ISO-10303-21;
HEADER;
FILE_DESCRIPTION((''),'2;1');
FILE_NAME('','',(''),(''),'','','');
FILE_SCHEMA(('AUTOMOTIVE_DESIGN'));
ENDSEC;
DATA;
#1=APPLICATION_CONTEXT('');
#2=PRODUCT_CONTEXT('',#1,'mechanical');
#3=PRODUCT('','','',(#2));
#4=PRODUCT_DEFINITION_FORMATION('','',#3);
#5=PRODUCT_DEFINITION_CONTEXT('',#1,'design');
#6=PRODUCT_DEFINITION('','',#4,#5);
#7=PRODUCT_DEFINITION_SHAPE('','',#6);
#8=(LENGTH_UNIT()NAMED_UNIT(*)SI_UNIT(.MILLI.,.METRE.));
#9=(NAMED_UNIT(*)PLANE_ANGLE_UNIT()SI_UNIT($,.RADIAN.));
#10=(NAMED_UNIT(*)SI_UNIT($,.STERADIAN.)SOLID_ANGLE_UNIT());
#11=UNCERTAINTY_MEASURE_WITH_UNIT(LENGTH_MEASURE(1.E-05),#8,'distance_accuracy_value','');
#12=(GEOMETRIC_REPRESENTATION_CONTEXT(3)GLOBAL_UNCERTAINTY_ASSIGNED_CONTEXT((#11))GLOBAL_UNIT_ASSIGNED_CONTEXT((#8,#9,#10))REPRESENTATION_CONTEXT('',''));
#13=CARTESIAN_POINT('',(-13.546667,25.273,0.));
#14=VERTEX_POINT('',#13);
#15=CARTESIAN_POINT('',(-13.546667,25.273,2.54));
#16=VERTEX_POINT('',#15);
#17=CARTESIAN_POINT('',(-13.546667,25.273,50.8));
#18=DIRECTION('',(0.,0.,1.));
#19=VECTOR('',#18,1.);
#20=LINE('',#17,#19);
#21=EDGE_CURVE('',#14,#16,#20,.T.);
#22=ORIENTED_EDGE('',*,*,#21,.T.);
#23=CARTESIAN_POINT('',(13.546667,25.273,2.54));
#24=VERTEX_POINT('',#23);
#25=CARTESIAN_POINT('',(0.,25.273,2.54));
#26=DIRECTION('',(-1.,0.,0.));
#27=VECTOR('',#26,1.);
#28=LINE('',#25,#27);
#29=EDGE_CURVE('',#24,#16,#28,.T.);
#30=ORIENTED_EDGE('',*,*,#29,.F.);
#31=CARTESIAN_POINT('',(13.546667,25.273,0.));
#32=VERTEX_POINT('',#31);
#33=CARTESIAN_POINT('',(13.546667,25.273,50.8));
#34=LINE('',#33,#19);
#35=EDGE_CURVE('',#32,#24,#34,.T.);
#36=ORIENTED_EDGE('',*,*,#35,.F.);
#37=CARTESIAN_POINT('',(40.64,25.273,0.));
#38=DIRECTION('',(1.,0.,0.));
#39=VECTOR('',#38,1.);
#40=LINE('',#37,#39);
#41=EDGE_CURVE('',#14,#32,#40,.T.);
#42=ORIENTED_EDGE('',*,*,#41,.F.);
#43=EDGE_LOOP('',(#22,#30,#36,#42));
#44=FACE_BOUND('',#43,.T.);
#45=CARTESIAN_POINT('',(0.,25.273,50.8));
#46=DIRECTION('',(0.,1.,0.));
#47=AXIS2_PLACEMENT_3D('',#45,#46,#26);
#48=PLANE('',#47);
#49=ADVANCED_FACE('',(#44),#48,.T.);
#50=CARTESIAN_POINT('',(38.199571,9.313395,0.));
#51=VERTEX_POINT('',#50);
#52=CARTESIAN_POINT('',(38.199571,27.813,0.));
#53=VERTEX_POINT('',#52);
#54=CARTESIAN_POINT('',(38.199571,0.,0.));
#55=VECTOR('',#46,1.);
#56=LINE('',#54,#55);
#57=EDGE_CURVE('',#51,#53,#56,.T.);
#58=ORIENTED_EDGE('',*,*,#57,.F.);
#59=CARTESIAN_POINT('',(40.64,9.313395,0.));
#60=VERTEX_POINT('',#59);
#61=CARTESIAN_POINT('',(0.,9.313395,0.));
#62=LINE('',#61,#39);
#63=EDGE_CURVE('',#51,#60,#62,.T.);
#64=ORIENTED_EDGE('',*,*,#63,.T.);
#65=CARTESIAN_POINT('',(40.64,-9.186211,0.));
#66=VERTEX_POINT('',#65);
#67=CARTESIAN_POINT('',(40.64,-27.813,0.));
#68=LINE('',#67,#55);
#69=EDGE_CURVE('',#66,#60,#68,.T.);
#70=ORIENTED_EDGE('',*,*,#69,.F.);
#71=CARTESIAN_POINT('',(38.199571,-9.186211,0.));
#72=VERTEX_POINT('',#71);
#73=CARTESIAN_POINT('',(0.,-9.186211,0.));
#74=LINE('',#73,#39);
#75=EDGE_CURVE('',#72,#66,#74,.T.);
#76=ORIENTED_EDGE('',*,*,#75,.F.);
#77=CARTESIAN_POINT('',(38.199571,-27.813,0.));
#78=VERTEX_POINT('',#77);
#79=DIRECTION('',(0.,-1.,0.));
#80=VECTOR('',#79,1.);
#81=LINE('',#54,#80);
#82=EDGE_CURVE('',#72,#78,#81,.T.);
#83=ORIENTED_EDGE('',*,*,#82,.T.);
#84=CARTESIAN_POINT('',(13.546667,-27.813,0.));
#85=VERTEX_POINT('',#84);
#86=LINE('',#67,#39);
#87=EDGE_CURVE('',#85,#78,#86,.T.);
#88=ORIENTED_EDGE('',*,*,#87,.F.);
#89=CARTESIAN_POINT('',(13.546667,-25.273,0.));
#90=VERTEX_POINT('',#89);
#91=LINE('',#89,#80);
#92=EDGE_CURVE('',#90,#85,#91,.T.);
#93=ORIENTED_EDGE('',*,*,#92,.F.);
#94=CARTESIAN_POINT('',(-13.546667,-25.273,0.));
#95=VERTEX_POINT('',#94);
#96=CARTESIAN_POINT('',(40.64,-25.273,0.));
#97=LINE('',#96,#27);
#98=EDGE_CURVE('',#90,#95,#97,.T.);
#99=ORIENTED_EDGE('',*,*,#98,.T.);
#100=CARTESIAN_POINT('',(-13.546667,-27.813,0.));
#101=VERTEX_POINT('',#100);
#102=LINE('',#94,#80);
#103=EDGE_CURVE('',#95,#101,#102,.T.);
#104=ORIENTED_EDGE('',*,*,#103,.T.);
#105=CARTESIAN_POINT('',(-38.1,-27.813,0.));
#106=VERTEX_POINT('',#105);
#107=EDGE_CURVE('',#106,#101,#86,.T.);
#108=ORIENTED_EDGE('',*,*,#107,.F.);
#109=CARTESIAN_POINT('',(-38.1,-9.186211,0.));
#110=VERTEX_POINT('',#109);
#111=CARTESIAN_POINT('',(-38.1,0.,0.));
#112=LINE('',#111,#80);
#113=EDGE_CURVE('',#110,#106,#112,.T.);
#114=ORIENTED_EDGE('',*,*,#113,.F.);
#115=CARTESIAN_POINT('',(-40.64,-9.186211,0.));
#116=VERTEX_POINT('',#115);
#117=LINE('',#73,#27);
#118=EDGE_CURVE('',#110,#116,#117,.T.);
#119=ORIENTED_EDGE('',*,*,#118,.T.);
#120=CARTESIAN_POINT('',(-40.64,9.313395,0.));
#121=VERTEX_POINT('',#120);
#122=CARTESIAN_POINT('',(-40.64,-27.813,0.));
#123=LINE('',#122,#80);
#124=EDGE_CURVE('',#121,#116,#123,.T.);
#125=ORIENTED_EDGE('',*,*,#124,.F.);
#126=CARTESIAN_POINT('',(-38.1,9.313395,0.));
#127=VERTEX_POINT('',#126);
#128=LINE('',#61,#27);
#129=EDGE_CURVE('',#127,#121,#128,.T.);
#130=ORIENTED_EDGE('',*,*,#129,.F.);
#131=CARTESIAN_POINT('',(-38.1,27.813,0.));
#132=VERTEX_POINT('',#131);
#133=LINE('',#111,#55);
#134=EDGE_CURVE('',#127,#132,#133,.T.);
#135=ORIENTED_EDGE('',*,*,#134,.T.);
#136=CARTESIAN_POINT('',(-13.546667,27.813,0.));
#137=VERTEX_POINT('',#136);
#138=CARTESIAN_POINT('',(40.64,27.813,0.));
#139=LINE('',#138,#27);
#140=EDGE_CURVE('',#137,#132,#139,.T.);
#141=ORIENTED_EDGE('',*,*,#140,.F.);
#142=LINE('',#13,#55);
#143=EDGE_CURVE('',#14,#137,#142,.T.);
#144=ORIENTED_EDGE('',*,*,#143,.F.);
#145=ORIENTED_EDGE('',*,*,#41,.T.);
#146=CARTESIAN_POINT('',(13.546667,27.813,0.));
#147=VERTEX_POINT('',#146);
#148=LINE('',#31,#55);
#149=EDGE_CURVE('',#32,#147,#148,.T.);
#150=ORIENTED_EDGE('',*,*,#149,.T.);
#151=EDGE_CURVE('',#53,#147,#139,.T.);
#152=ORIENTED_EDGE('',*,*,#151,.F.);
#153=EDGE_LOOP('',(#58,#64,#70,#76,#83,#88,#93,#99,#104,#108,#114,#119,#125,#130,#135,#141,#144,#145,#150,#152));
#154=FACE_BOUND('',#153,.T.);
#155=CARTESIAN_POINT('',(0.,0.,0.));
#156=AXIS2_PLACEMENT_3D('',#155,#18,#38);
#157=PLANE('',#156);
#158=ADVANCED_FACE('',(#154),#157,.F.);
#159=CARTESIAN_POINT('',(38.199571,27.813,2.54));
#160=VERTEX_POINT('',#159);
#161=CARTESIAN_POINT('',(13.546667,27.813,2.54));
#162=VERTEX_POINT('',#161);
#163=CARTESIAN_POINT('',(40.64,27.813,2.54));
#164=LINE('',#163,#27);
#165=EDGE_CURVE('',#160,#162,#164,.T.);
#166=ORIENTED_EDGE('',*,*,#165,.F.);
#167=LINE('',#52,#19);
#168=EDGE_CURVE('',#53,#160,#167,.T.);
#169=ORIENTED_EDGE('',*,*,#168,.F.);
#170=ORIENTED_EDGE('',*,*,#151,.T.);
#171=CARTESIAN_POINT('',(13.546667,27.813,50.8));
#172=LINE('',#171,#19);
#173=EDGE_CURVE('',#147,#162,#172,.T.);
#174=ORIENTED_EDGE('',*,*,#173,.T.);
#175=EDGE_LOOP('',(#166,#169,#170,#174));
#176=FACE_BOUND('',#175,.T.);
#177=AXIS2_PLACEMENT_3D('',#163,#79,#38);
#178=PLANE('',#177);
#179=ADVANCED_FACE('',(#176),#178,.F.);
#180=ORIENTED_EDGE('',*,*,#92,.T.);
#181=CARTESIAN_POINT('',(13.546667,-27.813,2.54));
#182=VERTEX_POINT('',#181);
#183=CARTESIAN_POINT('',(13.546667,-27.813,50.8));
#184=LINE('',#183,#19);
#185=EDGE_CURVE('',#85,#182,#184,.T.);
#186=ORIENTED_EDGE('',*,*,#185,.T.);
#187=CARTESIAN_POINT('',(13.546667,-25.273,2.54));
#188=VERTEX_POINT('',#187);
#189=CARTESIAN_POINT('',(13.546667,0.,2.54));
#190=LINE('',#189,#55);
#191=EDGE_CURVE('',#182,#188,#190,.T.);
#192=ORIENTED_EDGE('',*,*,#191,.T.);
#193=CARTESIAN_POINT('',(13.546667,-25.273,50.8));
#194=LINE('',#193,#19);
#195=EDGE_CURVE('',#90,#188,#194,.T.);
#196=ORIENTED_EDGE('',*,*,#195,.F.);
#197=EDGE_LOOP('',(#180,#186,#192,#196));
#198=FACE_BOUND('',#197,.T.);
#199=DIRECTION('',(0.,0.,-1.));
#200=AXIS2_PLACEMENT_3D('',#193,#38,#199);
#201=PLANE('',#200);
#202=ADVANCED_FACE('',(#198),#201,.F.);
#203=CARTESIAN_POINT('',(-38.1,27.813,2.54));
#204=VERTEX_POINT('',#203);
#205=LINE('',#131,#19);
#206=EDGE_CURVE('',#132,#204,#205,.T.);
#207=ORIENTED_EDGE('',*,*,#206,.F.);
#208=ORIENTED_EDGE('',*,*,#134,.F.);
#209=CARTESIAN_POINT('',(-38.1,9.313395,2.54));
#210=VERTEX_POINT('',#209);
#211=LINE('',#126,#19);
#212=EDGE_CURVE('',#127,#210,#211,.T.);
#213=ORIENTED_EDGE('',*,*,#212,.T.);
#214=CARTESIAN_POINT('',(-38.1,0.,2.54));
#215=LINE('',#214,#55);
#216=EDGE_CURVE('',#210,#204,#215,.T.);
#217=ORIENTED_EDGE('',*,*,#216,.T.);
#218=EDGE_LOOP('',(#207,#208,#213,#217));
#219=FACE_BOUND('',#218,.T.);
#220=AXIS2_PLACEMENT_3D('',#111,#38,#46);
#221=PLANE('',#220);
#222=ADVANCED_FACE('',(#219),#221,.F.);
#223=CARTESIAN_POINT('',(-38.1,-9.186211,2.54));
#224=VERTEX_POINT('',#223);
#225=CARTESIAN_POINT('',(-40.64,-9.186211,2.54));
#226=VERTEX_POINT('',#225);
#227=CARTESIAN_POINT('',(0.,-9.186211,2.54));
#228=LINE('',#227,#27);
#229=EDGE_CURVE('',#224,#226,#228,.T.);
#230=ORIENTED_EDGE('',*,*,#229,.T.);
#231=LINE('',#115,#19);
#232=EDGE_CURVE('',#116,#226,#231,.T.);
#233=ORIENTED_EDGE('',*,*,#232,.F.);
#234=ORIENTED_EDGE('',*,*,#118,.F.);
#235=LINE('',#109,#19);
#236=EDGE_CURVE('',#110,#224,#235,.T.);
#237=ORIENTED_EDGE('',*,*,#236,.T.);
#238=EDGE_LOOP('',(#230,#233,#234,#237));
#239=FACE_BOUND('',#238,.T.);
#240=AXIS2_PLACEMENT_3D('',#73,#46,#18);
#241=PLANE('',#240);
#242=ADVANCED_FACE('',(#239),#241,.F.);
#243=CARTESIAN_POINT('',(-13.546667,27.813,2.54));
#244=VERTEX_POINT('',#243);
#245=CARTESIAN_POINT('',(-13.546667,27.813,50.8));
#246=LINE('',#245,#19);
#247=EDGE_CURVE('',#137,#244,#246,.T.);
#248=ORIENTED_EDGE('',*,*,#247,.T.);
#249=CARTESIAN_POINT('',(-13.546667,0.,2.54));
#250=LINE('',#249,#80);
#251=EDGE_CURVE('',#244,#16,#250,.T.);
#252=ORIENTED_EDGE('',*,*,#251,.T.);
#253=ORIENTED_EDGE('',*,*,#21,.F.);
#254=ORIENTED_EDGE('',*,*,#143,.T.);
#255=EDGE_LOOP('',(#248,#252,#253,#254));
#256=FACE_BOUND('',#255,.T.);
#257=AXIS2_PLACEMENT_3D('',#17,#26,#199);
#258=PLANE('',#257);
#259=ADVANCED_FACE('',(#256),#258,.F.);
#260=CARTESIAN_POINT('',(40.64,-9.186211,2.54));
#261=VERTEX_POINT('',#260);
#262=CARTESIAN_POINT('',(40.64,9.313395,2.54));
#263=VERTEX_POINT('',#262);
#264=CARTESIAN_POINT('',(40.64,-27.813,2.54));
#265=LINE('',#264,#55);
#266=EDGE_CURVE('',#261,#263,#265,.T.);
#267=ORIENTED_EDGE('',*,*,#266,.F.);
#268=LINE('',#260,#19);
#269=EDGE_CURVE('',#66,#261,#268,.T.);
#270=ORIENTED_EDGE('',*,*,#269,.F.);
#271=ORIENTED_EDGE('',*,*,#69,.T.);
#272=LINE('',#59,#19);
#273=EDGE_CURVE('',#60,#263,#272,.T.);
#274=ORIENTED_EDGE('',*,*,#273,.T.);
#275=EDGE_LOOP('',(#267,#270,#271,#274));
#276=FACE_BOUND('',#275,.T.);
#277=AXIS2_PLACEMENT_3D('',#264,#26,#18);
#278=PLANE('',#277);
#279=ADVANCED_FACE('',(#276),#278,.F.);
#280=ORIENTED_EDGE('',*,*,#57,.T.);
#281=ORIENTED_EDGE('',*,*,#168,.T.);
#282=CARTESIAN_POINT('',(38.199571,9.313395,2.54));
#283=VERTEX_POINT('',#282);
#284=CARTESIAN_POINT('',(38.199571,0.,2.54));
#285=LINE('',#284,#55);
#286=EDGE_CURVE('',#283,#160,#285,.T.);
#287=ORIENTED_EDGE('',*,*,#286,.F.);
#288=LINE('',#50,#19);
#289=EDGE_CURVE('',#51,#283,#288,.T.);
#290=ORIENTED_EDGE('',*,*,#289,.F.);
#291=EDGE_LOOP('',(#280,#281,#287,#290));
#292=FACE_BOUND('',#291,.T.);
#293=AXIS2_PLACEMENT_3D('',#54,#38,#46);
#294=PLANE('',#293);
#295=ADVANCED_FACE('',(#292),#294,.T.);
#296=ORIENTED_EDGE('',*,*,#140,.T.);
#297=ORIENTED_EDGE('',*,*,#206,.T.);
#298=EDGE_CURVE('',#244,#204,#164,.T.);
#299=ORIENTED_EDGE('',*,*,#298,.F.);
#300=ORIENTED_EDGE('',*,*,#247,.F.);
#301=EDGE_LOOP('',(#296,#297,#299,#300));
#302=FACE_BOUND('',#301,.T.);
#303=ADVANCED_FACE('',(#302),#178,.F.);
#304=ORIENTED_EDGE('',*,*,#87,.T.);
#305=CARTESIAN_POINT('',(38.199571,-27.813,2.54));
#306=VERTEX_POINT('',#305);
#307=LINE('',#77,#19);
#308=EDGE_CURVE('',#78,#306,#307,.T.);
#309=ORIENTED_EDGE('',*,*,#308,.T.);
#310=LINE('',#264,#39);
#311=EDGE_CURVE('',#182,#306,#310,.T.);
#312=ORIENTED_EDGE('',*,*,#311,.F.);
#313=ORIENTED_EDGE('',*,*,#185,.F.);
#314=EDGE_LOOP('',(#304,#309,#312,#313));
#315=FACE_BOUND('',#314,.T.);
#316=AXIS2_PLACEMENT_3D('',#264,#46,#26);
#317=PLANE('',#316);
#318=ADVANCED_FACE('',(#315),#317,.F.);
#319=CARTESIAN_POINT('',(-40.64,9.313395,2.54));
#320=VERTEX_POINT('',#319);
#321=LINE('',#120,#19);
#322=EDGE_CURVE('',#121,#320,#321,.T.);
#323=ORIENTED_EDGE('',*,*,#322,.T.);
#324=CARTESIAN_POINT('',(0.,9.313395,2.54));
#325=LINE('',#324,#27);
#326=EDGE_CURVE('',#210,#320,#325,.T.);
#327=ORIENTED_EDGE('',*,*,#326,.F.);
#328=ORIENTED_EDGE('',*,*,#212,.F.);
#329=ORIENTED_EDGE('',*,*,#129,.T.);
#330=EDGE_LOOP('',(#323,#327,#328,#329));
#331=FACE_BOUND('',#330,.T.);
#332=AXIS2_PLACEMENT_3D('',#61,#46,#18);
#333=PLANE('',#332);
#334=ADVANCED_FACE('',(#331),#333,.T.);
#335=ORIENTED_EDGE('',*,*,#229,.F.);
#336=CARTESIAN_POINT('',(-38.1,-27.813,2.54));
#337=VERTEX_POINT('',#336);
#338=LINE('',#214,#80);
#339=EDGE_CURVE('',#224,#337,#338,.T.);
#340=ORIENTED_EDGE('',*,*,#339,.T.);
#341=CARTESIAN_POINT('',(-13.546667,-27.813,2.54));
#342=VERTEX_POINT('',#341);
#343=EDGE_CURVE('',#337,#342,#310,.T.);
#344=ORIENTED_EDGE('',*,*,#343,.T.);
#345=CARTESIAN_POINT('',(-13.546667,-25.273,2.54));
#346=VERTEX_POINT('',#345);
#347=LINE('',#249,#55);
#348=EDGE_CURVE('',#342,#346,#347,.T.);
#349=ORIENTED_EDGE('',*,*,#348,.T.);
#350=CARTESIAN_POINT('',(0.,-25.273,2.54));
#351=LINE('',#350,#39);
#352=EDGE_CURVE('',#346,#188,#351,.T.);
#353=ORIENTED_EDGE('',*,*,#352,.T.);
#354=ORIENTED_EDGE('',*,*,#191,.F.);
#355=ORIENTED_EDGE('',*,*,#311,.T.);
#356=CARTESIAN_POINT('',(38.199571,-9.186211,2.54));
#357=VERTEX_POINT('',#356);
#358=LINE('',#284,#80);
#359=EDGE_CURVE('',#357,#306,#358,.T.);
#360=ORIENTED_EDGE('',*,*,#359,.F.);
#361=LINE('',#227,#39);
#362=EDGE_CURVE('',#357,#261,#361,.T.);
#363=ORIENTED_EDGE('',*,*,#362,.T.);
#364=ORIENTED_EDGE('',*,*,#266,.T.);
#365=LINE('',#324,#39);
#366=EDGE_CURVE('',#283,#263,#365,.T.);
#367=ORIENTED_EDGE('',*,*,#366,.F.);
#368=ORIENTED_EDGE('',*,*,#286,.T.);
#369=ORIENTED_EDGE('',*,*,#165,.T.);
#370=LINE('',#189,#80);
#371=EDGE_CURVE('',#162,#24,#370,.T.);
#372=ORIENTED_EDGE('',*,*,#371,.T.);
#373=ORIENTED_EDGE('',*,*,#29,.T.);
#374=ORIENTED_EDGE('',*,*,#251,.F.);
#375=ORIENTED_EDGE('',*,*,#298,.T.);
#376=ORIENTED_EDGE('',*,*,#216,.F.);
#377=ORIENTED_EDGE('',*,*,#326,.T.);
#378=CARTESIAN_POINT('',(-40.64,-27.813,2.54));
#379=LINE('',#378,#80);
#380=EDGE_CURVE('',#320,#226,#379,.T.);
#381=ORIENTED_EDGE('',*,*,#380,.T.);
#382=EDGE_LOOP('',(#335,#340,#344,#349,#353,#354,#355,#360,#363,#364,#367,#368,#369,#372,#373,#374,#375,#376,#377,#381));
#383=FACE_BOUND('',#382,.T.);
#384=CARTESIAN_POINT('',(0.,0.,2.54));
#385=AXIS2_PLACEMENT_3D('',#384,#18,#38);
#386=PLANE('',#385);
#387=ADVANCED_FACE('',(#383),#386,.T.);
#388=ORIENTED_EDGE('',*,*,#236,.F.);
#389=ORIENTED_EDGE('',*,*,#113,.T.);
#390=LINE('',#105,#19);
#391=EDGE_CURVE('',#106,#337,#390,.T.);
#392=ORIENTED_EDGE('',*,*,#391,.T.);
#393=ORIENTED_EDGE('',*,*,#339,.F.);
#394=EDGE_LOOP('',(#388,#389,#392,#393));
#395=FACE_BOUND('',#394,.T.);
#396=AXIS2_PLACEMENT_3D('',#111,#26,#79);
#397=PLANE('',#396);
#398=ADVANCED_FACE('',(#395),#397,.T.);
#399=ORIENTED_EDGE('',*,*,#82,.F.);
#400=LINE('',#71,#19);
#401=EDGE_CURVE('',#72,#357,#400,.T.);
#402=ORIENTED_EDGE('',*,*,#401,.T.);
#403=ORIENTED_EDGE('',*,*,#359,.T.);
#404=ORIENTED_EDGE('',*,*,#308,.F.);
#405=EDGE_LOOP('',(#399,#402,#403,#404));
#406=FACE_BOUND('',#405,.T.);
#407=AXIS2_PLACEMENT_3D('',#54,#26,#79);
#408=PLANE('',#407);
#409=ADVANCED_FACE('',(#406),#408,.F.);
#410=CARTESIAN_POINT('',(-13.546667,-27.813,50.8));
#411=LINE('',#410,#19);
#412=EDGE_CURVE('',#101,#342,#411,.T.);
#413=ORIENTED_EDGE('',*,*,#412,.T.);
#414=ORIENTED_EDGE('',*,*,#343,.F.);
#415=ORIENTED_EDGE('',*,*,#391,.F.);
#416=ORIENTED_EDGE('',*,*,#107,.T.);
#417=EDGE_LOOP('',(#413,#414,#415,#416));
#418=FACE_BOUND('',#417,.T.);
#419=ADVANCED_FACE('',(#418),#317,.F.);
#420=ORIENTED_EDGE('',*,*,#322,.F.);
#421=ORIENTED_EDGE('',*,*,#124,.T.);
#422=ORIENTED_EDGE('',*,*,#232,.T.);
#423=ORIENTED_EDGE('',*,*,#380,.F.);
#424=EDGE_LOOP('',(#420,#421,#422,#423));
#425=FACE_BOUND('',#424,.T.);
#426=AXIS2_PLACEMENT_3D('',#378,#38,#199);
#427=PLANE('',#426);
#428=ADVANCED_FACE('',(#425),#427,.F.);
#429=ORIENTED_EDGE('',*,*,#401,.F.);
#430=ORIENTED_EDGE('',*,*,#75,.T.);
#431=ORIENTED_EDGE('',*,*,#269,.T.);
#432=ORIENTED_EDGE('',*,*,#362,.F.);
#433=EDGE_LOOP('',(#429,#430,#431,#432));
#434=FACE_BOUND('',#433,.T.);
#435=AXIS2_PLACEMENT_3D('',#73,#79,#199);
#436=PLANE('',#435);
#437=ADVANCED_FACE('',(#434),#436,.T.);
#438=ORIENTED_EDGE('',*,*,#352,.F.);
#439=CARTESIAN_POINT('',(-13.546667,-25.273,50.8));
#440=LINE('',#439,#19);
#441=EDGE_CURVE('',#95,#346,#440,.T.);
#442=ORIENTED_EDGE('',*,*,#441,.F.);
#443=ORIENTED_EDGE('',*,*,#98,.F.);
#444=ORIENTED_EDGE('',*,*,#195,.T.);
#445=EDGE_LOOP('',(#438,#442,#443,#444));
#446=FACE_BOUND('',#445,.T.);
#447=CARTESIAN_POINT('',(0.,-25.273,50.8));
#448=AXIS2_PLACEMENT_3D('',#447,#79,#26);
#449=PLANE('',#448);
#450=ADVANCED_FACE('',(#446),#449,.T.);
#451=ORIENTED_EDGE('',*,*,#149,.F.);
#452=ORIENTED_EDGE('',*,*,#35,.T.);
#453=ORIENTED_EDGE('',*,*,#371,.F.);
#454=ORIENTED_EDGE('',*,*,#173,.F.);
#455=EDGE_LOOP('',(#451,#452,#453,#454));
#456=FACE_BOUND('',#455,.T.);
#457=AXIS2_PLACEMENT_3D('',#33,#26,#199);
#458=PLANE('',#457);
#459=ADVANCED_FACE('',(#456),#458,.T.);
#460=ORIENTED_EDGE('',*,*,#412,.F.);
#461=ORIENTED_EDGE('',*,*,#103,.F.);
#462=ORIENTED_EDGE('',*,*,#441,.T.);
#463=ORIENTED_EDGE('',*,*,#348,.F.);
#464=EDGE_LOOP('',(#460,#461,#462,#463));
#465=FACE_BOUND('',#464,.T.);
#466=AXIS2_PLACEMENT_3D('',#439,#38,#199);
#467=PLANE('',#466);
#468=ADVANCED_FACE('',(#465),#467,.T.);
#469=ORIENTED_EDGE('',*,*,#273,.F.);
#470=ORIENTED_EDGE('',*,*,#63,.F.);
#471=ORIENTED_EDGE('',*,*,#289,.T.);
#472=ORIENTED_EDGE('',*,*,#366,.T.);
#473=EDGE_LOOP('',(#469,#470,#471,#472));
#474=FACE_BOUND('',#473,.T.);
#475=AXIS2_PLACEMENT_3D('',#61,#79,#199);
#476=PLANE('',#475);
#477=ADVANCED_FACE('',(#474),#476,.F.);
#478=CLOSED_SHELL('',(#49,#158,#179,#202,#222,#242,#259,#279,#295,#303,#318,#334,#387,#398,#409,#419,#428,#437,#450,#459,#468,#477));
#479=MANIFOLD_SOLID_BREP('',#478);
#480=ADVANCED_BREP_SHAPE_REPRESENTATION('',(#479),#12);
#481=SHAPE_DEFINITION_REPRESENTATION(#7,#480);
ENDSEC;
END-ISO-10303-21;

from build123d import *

# Parameters (mm, degrees)
SKETCH1_W           = 81.28
SKETCH1_H           = 55.626
BOSS_EXTRUDE1_DEPTH = 2.54
SKETCH2_W           = 2.54
SKETCH2_H           = 18.499605323
SKETCH2_H_2         = 18.818048641
CUT_EXTRUDE1_DEPTH  = 50.311501387
CAVITY9_START       = -27.813
CAVITY9_OUTLINE_W   = 27.093333334
CAVITY9_OUTLINE_H   = 2.54
CAVITY9_DEPTH       = 2.54
CAVITY9_START_2     = 25.273
CAVITY9_2_OUTLINE_W = 27.093333334
CAVITY9_2_OUTLINE_H = 2.54
CAVITY9_2_DEPTH     = 2.54


# Read off the part's stored shape, not the designer's step: Cavity9
with BuildPart() as part:
    # Sketch1 → Boss-Extrude1 (new body)
    with BuildSketch(Plane.XY):
        Rectangle(SKETCH1_W, SKETCH1_H)
    extrude(amount=BOSS_EXTRUDE1_DEPTH)

    # Sketch2 → Cut-Extrude1 (cut, through all)
    with BuildSketch(Plane.XY.offset(2.54)):
        with Locations((-39.37, 18.563197339)):
            Rectangle(SKETCH2_W, SKETCH2_H)
        with Locations((-39.37, -18.595234966)):
            Rectangle(SKETCH2_W, SKETCH2_H_2)
        with Locations((39.469570783, -18.595234966)):
            Rectangle(SKETCH2_W, SKETCH2_H_2)
        with Locations((39.469570783, 18.563197339)):
            Rectangle(SKETCH2_W, SKETCH2_H)
    extrude(amount=-CUT_EXTRUDE1_DEPTH, mode=Mode.SUBTRACT)

    # Cavity9 outline → Cavity9 (cut)
    with BuildSketch(Plane(origin=(0, 0, 0), x_dir=(1, 0, 0), z_dir=(0, 1, 0)).offset(CAVITY9_START)):
        with Locations((0, -1.27)):
            Rectangle(CAVITY9_OUTLINE_W, CAVITY9_OUTLINE_H)
    extrude(amount=CAVITY9_DEPTH, mode=Mode.SUBTRACT)

    # Cavity9 2 outline → Cavity9 2 (cut)
    with BuildSketch(Plane(origin=(0, 0, 0), x_dir=(1, 0, 0), z_dir=(0, 1, 0)).offset(CAVITY9_START_2)):
        with Locations((0, -1.27)):
            Rectangle(CAVITY9_2_OUTLINE_W, CAVITY9_2_OUTLINE_H)
    extrude(amount=CAVITY9_2_DEPTH, mode=Mode.SUBTRACT)


solid = part.part
